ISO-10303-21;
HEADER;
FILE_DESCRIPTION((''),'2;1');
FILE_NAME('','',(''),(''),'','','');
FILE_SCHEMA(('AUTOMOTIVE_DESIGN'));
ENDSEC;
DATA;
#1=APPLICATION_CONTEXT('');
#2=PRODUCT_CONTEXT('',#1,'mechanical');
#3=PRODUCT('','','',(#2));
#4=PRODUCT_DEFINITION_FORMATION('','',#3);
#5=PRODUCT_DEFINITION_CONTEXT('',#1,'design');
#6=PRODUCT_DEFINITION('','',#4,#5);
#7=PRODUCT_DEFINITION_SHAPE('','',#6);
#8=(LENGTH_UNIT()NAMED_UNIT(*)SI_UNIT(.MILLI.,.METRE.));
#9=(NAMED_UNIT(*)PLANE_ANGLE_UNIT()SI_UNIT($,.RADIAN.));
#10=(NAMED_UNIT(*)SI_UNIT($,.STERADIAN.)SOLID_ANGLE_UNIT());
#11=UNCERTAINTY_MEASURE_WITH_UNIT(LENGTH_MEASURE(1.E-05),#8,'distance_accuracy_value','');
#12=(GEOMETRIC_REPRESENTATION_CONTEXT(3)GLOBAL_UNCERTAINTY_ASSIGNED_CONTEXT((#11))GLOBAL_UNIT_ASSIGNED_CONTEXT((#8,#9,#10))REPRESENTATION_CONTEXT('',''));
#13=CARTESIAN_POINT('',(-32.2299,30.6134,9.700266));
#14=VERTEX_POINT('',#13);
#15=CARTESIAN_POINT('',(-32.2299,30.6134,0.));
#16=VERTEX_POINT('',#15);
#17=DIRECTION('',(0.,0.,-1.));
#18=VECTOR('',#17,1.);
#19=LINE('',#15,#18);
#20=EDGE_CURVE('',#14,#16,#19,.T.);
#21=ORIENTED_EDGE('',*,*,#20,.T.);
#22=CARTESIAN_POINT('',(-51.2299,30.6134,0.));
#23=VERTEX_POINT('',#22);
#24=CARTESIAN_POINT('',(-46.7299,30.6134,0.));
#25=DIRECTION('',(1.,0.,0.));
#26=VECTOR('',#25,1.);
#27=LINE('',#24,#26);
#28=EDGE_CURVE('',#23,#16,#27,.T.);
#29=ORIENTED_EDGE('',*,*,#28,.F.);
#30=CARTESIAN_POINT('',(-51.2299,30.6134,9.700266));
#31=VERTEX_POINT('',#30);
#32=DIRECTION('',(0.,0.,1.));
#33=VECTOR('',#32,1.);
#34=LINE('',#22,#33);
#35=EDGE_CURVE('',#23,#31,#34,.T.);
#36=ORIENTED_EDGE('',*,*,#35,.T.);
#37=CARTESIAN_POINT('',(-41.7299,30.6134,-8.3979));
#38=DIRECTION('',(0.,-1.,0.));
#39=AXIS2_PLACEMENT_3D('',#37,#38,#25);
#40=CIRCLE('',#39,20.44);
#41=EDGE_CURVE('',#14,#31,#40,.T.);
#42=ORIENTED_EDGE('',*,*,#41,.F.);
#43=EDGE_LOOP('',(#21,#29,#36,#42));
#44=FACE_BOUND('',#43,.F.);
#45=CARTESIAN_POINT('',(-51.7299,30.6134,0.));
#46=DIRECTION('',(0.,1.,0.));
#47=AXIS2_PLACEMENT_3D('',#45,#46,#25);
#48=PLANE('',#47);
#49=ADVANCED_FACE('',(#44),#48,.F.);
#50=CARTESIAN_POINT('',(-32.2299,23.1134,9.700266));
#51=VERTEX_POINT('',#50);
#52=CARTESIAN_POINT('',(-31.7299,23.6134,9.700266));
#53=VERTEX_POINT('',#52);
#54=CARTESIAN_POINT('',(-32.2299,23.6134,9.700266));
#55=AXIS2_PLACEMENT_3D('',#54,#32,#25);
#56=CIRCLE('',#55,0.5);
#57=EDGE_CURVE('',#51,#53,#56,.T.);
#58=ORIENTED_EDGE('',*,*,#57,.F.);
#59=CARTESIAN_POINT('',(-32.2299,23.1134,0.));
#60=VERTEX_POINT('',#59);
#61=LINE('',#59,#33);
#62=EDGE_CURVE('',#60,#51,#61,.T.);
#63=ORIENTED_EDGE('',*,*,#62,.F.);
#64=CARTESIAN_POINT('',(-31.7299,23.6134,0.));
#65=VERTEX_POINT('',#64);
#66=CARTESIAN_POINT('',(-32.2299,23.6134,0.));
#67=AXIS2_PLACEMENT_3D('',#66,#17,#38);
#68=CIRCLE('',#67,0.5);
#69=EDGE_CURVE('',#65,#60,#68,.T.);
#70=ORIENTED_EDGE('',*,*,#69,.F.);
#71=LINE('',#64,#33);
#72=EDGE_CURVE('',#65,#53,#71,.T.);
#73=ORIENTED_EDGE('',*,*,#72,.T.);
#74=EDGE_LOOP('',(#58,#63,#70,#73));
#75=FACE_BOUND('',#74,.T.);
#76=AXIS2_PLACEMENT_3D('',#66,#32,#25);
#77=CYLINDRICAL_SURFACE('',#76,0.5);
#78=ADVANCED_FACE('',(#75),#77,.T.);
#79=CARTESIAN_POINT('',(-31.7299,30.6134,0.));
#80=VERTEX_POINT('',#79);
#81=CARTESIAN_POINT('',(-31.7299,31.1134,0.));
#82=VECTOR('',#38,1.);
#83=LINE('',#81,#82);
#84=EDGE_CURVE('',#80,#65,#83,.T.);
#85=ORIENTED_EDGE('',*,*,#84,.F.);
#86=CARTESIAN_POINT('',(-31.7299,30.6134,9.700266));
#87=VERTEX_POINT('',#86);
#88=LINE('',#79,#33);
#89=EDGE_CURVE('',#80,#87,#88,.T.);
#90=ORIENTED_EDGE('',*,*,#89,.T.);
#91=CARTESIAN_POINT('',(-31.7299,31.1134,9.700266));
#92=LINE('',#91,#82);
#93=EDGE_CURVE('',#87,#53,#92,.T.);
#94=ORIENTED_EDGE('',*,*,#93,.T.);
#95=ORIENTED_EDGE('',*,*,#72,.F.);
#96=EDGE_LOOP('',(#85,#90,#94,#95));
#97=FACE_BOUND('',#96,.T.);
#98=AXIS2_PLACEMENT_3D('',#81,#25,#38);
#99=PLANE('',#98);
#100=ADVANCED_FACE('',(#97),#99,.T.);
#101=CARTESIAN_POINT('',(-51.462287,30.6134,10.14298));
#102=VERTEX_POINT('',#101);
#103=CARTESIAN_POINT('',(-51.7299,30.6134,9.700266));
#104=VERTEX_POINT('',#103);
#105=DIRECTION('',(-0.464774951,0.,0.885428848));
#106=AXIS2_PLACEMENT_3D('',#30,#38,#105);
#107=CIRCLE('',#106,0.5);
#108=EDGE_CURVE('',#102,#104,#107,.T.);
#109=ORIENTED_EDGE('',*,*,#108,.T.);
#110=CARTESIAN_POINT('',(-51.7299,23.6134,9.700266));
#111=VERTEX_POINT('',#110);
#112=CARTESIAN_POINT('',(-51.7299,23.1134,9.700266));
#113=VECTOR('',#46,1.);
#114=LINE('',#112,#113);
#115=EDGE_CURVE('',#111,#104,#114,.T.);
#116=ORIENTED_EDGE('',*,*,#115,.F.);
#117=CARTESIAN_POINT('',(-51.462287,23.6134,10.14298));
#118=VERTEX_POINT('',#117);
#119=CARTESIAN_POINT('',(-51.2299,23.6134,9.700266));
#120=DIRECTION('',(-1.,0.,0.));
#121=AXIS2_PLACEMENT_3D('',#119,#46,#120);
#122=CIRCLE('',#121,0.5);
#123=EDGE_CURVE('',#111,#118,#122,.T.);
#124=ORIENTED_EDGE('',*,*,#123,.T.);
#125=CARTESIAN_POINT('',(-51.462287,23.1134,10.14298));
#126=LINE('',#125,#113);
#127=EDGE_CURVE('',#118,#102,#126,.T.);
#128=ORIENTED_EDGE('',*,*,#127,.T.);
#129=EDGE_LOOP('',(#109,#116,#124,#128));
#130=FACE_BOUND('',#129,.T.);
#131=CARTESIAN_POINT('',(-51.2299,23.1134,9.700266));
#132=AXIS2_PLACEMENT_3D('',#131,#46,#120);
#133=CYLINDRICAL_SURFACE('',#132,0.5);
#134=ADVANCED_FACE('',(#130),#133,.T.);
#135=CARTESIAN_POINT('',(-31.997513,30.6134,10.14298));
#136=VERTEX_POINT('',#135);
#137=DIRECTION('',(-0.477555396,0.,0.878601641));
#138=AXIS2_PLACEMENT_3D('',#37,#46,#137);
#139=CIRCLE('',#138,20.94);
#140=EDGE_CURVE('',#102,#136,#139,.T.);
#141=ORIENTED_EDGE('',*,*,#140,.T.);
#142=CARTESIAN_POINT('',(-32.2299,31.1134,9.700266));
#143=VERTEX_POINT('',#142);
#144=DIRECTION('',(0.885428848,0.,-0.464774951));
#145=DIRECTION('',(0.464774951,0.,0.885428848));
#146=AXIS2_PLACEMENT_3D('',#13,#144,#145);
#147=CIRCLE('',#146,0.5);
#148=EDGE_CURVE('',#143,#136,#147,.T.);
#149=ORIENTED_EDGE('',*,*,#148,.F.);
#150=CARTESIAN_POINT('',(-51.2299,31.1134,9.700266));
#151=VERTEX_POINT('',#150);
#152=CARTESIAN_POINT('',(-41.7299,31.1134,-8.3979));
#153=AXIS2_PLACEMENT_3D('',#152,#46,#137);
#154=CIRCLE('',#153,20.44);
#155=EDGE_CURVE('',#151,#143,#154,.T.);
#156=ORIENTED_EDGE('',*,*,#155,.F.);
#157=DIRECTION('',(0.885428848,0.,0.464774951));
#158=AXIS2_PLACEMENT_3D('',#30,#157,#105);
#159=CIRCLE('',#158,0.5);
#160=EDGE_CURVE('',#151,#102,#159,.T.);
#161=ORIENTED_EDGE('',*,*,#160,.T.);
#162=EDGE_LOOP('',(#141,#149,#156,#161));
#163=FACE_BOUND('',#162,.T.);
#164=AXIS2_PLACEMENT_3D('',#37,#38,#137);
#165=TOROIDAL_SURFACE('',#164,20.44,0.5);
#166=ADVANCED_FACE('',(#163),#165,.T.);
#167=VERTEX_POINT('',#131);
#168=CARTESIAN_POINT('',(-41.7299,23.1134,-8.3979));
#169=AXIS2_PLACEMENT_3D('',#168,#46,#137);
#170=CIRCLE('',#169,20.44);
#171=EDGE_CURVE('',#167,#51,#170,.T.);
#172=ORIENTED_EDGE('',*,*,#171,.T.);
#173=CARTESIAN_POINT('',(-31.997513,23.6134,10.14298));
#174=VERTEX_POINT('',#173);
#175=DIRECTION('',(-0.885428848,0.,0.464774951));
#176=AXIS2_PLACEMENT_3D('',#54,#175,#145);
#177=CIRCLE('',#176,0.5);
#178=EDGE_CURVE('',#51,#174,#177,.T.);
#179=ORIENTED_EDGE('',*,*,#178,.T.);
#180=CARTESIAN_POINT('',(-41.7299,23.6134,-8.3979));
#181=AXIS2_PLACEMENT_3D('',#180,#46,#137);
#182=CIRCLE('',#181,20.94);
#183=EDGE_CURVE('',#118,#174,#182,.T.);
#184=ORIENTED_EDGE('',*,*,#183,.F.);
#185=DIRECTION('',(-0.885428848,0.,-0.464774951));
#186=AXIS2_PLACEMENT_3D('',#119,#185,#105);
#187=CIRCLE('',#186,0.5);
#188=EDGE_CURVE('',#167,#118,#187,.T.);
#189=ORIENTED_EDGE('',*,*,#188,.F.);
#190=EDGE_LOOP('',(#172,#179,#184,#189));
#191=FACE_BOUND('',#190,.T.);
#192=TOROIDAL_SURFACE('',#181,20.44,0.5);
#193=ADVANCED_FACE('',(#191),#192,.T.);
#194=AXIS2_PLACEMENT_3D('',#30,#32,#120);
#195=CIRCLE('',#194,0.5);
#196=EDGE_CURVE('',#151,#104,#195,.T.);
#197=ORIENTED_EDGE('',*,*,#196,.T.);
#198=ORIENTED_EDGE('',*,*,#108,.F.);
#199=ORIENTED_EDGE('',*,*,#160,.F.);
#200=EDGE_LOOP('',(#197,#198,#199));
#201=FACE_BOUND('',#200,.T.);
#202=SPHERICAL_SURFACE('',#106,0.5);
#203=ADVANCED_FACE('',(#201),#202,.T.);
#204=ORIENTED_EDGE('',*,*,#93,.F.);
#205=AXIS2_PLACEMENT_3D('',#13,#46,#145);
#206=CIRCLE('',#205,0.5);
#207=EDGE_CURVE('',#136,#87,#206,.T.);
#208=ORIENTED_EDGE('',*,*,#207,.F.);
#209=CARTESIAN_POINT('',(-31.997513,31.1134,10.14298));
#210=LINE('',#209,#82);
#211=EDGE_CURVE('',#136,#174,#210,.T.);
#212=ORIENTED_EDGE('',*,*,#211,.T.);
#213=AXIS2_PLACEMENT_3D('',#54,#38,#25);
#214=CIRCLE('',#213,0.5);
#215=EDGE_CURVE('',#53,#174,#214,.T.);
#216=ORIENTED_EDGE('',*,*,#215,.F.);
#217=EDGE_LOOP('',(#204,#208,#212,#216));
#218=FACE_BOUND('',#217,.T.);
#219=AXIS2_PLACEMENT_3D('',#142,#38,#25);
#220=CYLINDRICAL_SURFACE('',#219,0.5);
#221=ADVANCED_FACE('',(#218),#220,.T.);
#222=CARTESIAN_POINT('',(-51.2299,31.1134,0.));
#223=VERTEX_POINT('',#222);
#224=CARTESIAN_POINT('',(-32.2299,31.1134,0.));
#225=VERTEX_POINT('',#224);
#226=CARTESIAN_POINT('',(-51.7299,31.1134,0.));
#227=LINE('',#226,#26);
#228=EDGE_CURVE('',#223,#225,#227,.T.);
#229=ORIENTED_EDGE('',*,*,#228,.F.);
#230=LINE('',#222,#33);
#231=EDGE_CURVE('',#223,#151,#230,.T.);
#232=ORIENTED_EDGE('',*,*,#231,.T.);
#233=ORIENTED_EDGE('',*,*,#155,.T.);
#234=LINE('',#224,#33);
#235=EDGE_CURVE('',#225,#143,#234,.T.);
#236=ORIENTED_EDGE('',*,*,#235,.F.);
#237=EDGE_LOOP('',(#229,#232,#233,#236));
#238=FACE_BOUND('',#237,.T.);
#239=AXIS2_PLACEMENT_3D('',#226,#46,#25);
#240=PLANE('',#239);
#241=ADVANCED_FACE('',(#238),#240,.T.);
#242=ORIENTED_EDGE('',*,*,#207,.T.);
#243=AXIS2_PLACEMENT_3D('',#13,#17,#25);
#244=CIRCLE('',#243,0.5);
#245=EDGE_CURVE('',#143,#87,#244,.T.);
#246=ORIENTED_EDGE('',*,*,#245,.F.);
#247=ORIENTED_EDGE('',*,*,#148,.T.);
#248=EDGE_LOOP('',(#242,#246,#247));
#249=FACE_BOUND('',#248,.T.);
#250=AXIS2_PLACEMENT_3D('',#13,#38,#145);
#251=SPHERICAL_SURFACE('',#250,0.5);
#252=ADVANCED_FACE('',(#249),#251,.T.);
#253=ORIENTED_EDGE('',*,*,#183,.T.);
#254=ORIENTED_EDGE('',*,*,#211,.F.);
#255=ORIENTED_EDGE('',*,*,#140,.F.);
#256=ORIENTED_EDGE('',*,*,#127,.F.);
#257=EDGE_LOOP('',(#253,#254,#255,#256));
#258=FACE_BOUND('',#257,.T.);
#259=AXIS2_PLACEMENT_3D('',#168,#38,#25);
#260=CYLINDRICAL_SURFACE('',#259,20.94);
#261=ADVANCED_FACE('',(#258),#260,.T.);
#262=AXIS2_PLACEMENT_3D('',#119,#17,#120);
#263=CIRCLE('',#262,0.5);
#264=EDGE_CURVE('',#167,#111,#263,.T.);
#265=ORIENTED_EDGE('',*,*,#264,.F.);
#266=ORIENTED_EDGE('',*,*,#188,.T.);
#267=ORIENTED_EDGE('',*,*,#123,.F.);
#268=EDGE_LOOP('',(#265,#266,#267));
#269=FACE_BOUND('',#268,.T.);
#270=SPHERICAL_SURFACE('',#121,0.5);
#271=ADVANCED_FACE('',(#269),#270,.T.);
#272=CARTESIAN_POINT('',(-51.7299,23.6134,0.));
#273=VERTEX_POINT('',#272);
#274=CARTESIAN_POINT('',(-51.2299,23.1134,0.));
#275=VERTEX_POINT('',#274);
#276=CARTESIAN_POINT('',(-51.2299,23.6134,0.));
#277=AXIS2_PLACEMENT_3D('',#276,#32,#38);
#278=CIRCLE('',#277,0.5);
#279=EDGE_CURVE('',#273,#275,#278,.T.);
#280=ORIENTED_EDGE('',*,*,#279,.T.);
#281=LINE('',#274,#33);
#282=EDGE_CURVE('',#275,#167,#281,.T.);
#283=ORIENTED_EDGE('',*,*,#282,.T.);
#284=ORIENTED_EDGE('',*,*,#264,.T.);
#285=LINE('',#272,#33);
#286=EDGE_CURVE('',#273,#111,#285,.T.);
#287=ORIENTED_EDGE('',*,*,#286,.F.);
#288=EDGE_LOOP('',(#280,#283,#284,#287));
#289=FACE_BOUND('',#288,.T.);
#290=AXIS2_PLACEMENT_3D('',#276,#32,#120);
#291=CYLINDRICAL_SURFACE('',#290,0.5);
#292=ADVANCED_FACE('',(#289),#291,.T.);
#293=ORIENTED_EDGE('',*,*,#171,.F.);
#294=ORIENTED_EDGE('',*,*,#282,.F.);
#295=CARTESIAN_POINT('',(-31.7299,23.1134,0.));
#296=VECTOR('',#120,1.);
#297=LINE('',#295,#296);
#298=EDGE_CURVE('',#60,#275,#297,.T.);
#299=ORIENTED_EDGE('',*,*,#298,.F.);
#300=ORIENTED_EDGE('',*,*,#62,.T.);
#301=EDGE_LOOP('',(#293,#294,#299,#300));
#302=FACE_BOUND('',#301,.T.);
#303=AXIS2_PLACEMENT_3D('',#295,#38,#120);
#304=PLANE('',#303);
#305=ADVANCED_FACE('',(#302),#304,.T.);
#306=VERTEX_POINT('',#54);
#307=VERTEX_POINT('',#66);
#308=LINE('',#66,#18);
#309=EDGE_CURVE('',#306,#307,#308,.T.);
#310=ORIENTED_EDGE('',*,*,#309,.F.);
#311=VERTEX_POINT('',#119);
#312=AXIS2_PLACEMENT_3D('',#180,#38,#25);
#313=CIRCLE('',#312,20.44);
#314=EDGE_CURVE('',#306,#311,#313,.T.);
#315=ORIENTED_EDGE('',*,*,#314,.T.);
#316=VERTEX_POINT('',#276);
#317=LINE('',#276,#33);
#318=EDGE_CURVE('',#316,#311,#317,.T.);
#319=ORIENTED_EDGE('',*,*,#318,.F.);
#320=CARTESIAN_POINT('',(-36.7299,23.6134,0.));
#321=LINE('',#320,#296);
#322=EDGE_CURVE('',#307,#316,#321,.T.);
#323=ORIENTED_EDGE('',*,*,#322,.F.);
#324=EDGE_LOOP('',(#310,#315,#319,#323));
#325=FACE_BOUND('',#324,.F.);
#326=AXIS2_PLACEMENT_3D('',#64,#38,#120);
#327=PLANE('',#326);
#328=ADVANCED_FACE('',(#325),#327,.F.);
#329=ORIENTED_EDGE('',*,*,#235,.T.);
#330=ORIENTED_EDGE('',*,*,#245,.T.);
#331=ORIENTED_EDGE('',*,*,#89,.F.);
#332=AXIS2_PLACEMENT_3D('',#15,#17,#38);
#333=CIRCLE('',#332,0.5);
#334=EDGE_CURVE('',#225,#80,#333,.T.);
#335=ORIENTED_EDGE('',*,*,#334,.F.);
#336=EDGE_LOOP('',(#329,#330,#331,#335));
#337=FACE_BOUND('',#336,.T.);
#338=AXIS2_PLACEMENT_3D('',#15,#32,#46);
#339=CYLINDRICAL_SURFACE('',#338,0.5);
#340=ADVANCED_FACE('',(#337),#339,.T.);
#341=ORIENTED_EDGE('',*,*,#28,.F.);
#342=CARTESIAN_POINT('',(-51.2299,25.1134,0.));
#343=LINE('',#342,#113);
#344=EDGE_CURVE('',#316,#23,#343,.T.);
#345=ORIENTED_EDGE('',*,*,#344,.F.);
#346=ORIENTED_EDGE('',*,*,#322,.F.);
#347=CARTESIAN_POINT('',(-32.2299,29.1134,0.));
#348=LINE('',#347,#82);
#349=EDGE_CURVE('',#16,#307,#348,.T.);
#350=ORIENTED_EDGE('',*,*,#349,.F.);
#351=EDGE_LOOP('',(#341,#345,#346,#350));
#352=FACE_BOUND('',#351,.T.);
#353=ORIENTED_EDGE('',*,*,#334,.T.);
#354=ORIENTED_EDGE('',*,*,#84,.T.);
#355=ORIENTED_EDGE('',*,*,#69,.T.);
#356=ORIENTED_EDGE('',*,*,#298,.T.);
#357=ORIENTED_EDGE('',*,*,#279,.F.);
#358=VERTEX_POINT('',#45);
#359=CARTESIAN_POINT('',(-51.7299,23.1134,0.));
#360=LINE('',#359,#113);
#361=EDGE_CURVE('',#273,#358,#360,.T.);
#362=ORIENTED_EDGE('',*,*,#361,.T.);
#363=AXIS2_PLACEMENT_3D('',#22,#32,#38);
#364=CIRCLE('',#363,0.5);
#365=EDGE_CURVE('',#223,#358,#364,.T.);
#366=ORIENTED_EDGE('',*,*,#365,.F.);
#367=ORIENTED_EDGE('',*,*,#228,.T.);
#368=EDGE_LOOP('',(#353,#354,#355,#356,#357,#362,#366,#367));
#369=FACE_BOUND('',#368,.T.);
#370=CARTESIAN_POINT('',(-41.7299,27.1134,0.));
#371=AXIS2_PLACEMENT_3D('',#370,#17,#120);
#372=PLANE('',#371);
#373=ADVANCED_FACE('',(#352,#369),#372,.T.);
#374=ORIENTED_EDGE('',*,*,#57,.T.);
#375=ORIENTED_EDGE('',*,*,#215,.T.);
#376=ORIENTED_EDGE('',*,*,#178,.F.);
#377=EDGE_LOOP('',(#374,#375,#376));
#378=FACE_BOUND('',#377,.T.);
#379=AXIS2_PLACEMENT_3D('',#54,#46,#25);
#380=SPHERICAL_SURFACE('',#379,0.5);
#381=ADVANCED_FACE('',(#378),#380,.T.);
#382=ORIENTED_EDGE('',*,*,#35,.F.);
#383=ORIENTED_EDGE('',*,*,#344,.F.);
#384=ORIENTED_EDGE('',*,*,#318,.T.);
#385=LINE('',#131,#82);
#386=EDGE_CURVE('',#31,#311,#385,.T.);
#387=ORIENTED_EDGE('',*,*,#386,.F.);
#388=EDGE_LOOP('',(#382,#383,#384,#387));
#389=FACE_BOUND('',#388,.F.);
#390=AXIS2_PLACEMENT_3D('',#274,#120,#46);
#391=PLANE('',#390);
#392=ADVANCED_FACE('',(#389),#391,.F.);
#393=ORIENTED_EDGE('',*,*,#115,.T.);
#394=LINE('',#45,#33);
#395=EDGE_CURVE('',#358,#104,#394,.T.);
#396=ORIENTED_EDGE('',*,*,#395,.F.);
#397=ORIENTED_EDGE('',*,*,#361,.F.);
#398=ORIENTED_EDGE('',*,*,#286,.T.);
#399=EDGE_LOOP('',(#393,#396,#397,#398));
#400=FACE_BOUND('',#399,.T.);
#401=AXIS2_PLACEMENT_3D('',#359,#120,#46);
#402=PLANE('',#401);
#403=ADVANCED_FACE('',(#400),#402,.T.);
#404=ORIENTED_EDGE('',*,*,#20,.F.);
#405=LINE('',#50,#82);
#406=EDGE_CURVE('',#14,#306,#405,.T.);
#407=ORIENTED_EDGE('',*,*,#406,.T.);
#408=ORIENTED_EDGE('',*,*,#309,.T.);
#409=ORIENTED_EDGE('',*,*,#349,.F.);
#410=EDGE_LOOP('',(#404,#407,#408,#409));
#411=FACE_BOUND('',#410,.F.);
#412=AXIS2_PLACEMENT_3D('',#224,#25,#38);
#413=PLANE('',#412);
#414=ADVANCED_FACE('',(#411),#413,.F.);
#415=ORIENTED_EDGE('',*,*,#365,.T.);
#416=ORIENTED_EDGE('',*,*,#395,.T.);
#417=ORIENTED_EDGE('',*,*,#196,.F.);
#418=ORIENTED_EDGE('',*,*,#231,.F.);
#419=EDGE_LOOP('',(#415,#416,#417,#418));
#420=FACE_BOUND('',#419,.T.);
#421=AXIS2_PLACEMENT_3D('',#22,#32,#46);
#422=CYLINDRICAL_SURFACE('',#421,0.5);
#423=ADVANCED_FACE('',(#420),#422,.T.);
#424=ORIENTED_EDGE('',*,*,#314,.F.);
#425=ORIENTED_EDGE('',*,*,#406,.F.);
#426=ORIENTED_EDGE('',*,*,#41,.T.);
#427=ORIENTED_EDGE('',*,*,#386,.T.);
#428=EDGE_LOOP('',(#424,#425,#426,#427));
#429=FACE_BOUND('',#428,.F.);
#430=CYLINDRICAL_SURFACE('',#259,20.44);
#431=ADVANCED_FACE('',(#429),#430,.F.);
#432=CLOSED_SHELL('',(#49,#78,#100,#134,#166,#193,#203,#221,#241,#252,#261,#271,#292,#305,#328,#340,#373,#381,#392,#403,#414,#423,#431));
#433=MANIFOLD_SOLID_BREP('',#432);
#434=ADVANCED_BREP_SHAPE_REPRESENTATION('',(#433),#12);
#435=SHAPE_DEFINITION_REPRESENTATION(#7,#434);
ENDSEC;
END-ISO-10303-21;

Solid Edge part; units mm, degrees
sketch "Sketch1" plane through (0, 0, 0) normal (0, 0, 1) x (1, 0, 0)
  line L0 (-51.7299, 31.1134) -> (-31.7299, 31.1134)
  line L1 (-31.7299, 31.1134) -> (-31.7299, 23.1134)
  line L2 (-31.7299, 23.1134) -> (-51.7299, 23.1134)
  line L3 (-51.7299, 23.1134) -> (-51.7299, 31.1134)
extrude "Protrusion1" add sketch "Sketch1" along normal blind 10
sketch "Sketch2" plane through (-41.7299, 23.1134, 5) normal (0, -1, 0) x (1, 0, 0)
  arc A0 (-10, 5) -> (10, 5) centre (0, -13.3979) cw
extrude "Protrusion2" add sketch "Sketch2" against normal up to vertex (8 mm away) material side at (-41.7299, 23.1134, 12.4921)
shell "Thinwall_1" thickness 0.5 removed faces 1 at (-34.8632, 24.5267, 0)
fillet "Round_1" radius 0.5 8 edges at (-41.7299, 23.1134, 12.5421) (-51.7299, 27.1134, 10) (-51.7299, 23.1134, 5) (-41.7299, 31.1134, 12.5421) (-51.7299, 31.1134, 5) (-31.7299, 31.1134, 5) (-31.7299, 27.1134, 10) (-31.7299, 23.1134, 5)
properties part number "598-205" material "N\\A"
